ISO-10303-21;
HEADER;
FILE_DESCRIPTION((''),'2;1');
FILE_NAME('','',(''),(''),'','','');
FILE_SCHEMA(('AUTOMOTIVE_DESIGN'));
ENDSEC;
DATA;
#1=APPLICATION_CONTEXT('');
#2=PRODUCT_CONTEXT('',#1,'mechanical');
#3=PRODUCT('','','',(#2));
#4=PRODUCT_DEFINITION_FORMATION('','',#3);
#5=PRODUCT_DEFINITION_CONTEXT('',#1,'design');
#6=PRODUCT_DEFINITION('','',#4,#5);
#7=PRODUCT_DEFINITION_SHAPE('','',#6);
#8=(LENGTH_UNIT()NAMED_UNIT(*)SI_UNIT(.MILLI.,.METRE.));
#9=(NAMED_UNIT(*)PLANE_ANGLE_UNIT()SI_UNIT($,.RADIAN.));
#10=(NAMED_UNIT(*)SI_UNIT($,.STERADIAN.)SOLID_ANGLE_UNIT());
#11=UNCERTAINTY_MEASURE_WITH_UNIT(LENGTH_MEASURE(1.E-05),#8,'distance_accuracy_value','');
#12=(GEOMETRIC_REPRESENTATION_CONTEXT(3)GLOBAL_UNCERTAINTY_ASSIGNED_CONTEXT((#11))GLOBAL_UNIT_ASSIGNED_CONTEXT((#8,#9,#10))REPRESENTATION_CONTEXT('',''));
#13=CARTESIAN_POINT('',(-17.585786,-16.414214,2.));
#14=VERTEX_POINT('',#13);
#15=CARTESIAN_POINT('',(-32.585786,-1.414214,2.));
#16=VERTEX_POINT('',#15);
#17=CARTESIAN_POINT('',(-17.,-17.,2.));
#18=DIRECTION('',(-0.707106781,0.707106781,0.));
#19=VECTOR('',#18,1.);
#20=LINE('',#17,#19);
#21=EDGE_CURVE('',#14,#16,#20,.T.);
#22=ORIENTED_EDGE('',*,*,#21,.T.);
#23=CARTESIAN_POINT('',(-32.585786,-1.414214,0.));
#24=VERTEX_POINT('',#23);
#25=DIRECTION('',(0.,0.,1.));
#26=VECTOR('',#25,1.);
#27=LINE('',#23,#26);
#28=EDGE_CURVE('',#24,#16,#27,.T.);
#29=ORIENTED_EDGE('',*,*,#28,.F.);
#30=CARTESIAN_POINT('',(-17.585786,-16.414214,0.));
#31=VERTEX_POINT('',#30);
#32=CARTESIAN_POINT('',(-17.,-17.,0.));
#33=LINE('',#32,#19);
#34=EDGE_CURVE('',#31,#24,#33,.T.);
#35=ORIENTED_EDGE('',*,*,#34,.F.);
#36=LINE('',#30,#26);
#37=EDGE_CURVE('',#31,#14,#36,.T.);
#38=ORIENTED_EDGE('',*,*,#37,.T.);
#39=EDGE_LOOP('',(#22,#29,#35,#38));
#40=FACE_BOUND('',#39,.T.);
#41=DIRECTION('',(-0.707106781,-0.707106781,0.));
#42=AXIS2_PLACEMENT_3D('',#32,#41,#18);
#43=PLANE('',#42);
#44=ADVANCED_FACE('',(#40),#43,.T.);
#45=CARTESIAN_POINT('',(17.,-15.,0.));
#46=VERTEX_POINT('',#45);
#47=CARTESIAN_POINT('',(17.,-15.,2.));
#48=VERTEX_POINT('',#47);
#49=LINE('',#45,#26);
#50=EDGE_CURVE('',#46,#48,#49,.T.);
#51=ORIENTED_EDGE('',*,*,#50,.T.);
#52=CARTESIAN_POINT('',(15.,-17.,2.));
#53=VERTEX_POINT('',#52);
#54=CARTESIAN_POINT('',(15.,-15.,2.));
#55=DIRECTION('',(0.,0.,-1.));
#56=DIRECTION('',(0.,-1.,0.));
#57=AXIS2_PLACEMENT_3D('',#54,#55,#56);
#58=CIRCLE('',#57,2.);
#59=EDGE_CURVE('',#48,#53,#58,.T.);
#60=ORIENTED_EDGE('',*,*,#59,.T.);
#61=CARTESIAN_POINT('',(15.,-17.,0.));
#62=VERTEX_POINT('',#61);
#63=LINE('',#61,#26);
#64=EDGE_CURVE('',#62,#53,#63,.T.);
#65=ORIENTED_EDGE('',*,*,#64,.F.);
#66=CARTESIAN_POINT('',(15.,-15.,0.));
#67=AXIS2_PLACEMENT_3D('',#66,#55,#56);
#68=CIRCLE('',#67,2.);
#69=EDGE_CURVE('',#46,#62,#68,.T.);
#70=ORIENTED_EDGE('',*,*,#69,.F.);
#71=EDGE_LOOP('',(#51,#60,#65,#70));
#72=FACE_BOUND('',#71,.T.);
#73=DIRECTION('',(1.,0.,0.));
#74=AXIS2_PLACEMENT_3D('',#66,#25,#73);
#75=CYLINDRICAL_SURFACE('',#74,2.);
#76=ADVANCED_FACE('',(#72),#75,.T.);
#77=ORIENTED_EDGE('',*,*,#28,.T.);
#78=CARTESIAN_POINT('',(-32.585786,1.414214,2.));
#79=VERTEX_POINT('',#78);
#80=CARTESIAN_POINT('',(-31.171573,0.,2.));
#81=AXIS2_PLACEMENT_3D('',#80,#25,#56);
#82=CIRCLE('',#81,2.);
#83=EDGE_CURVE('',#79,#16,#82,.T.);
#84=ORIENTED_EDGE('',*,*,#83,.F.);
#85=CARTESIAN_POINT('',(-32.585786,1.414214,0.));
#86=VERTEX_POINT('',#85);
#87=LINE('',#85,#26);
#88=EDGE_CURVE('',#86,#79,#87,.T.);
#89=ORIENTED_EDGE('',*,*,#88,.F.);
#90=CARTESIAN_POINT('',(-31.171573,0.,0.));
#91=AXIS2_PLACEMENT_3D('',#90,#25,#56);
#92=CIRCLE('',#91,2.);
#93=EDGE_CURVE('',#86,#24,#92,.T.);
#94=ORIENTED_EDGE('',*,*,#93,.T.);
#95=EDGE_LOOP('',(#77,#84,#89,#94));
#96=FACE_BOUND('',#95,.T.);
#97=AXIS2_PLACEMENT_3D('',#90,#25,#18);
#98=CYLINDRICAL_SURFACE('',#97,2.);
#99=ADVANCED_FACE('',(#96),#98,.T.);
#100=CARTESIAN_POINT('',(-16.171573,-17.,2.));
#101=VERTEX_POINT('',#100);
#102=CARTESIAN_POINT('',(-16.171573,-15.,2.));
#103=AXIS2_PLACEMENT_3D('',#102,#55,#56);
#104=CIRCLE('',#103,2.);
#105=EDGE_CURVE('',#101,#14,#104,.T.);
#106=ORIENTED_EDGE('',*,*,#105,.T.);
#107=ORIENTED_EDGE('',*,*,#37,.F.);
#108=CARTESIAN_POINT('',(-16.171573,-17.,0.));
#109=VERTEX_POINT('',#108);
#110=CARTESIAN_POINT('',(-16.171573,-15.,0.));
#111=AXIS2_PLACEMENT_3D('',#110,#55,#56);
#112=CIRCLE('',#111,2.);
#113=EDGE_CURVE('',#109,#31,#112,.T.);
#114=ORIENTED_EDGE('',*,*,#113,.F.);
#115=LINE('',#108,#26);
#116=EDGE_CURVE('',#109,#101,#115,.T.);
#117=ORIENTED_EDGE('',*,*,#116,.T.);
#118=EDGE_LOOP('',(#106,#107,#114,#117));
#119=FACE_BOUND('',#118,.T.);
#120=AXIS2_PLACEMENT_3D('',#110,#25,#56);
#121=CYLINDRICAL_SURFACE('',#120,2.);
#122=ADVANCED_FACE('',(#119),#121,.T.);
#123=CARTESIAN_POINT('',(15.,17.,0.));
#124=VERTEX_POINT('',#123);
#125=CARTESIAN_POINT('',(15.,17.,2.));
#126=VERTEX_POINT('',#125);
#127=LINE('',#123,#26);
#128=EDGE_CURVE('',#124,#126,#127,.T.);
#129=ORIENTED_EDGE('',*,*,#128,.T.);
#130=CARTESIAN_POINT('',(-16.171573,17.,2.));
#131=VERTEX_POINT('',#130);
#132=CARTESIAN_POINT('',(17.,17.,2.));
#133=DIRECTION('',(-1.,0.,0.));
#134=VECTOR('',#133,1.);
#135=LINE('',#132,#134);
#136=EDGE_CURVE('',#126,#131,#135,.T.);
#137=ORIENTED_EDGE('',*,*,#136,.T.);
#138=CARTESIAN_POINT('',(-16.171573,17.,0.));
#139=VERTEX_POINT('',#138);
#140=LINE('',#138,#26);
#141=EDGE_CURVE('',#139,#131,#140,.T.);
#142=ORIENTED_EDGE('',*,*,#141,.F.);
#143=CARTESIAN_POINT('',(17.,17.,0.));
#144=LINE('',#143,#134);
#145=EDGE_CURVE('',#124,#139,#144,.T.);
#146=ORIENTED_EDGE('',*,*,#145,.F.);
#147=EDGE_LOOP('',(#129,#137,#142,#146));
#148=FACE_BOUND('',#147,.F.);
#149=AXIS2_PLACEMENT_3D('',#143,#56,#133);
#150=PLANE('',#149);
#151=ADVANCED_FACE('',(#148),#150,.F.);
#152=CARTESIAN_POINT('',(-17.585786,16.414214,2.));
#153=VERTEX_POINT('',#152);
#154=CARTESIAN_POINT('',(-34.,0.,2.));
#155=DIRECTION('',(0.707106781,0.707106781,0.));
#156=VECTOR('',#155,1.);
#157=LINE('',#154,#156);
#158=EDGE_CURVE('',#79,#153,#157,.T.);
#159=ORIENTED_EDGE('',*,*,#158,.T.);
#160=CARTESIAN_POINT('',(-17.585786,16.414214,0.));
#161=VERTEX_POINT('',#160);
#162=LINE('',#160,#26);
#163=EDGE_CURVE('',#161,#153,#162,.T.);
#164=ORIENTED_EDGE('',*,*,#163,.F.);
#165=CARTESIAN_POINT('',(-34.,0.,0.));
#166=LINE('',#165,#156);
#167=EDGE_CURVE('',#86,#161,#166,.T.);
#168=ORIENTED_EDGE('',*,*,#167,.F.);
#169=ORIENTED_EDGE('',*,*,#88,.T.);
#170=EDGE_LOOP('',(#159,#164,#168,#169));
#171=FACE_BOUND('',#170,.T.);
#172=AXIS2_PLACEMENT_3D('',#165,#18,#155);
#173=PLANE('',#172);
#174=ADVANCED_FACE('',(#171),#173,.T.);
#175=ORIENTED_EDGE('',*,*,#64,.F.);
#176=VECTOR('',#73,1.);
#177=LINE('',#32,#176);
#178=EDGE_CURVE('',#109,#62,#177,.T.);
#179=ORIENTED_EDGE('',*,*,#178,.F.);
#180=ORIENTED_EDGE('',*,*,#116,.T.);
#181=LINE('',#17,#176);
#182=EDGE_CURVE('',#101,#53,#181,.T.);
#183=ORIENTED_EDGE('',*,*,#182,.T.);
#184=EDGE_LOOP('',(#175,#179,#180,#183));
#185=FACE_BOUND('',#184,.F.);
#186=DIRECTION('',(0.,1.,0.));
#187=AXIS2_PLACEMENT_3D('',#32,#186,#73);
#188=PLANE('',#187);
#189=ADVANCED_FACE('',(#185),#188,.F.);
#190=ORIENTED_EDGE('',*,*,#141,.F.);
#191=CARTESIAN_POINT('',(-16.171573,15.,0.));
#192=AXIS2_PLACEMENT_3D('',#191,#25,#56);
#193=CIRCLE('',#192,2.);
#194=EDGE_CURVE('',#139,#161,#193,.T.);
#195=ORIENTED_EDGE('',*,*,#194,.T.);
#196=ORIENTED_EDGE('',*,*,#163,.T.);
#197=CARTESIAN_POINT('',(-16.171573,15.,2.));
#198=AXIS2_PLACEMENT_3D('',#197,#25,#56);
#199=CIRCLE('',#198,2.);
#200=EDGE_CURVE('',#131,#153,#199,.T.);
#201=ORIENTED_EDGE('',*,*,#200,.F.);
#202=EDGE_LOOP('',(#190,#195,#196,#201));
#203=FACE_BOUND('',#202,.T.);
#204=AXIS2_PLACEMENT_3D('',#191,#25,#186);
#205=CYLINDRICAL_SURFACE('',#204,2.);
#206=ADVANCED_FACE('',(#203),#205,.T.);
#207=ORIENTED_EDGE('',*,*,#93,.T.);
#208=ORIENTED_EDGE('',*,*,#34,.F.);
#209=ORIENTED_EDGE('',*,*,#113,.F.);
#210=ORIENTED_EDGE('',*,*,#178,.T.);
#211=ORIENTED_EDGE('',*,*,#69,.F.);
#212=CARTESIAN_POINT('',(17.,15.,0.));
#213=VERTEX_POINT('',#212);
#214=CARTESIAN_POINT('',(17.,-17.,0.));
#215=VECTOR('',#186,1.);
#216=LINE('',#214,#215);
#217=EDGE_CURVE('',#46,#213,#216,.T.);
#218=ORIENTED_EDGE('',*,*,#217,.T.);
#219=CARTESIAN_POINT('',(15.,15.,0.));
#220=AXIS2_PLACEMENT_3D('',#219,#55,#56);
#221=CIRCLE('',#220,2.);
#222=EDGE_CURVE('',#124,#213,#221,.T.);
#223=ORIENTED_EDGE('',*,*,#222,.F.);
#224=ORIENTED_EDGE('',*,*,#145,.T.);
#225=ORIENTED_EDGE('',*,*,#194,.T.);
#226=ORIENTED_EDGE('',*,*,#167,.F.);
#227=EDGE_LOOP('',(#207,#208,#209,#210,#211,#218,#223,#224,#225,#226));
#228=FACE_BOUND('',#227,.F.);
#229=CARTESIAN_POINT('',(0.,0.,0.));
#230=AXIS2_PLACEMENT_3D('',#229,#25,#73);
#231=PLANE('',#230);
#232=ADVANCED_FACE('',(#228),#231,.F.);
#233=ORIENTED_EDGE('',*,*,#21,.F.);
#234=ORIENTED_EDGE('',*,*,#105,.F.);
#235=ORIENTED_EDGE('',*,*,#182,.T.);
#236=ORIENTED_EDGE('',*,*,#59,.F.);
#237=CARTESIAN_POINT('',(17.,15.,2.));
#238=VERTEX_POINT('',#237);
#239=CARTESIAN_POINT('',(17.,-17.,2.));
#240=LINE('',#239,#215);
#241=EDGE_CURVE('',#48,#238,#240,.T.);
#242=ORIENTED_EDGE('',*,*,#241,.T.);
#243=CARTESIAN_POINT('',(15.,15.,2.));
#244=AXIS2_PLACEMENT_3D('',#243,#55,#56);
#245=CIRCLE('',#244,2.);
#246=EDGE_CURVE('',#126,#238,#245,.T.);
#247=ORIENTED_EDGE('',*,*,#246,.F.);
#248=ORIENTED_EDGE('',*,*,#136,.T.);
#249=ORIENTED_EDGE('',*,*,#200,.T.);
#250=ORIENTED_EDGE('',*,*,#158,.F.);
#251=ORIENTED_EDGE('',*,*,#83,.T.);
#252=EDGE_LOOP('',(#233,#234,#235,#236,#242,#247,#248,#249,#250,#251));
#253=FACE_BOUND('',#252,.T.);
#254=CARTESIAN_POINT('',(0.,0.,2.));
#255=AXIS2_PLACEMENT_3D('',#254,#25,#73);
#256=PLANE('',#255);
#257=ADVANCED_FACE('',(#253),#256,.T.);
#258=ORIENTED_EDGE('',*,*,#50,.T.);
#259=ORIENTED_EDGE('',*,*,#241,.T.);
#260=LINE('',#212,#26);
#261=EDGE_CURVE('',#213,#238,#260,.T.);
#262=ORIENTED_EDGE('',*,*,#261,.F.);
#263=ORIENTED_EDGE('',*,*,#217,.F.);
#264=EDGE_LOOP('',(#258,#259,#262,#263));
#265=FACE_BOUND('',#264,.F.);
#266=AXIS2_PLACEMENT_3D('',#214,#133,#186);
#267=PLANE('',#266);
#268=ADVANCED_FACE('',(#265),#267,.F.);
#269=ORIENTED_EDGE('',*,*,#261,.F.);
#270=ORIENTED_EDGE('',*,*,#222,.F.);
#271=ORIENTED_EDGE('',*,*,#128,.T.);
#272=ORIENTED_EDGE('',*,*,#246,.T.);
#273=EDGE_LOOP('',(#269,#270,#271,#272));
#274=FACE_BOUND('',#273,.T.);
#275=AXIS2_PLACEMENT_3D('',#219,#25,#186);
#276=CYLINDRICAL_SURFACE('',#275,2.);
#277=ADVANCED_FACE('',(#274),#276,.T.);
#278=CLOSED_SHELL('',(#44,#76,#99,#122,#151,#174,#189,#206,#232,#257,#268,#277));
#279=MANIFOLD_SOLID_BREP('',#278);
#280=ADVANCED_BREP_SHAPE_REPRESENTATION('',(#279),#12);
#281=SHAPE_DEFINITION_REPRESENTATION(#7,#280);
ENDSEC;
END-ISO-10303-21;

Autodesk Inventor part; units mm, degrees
ref_plane "YZ Plane" through (0, 0, 0) normal (1, 0, 0) x (0, 1, 0)
ref_plane "XZ Plane" through (0, 0, 0) normal (0, 1, 0) x (-1, 0, 0)
ref_plane "XY Plane" through (0, 0, 0) normal (0, 0, 1) x (1, 0, 0)
sketch "Sketch1" plane through (0, 0, 0) normal (0, 0, 1) x (1, 0, 0)
  line L0 (-17, -17) -> (17, -17)
  line L1 (17, -17) -> (17, 17)
  line L2 (17, 17) -> (-17, 17)
  line L3 (-17, 17) -> (-17, -17)
  line L4 (-17, -17) -> (17, 17) construction
  line L5 (17, -17) -> (-17, 17) construction
  line L6 (-17, -17) -> (-34, 0)
  line L7 (-34, 0) -> (-17, 17)
  point P0 (0, 0)
  point P1 (-17, 0)
  dimension "d154" = 34
  dimension "d155" = 34
  dimension "d180" = 17
extrude "Plate5" add sketch "Sketch1" along normal blind 2
fillet "Corner Round1" radius 2 5 edges at (17, 17, 1) (-17, 17, 1) (-17, -17, 1) (17, -17, 1) (-34, 0, 1)
properties part number "PRS 1666 DrSysB CUP 1_1200" material "Stainless Steel"
